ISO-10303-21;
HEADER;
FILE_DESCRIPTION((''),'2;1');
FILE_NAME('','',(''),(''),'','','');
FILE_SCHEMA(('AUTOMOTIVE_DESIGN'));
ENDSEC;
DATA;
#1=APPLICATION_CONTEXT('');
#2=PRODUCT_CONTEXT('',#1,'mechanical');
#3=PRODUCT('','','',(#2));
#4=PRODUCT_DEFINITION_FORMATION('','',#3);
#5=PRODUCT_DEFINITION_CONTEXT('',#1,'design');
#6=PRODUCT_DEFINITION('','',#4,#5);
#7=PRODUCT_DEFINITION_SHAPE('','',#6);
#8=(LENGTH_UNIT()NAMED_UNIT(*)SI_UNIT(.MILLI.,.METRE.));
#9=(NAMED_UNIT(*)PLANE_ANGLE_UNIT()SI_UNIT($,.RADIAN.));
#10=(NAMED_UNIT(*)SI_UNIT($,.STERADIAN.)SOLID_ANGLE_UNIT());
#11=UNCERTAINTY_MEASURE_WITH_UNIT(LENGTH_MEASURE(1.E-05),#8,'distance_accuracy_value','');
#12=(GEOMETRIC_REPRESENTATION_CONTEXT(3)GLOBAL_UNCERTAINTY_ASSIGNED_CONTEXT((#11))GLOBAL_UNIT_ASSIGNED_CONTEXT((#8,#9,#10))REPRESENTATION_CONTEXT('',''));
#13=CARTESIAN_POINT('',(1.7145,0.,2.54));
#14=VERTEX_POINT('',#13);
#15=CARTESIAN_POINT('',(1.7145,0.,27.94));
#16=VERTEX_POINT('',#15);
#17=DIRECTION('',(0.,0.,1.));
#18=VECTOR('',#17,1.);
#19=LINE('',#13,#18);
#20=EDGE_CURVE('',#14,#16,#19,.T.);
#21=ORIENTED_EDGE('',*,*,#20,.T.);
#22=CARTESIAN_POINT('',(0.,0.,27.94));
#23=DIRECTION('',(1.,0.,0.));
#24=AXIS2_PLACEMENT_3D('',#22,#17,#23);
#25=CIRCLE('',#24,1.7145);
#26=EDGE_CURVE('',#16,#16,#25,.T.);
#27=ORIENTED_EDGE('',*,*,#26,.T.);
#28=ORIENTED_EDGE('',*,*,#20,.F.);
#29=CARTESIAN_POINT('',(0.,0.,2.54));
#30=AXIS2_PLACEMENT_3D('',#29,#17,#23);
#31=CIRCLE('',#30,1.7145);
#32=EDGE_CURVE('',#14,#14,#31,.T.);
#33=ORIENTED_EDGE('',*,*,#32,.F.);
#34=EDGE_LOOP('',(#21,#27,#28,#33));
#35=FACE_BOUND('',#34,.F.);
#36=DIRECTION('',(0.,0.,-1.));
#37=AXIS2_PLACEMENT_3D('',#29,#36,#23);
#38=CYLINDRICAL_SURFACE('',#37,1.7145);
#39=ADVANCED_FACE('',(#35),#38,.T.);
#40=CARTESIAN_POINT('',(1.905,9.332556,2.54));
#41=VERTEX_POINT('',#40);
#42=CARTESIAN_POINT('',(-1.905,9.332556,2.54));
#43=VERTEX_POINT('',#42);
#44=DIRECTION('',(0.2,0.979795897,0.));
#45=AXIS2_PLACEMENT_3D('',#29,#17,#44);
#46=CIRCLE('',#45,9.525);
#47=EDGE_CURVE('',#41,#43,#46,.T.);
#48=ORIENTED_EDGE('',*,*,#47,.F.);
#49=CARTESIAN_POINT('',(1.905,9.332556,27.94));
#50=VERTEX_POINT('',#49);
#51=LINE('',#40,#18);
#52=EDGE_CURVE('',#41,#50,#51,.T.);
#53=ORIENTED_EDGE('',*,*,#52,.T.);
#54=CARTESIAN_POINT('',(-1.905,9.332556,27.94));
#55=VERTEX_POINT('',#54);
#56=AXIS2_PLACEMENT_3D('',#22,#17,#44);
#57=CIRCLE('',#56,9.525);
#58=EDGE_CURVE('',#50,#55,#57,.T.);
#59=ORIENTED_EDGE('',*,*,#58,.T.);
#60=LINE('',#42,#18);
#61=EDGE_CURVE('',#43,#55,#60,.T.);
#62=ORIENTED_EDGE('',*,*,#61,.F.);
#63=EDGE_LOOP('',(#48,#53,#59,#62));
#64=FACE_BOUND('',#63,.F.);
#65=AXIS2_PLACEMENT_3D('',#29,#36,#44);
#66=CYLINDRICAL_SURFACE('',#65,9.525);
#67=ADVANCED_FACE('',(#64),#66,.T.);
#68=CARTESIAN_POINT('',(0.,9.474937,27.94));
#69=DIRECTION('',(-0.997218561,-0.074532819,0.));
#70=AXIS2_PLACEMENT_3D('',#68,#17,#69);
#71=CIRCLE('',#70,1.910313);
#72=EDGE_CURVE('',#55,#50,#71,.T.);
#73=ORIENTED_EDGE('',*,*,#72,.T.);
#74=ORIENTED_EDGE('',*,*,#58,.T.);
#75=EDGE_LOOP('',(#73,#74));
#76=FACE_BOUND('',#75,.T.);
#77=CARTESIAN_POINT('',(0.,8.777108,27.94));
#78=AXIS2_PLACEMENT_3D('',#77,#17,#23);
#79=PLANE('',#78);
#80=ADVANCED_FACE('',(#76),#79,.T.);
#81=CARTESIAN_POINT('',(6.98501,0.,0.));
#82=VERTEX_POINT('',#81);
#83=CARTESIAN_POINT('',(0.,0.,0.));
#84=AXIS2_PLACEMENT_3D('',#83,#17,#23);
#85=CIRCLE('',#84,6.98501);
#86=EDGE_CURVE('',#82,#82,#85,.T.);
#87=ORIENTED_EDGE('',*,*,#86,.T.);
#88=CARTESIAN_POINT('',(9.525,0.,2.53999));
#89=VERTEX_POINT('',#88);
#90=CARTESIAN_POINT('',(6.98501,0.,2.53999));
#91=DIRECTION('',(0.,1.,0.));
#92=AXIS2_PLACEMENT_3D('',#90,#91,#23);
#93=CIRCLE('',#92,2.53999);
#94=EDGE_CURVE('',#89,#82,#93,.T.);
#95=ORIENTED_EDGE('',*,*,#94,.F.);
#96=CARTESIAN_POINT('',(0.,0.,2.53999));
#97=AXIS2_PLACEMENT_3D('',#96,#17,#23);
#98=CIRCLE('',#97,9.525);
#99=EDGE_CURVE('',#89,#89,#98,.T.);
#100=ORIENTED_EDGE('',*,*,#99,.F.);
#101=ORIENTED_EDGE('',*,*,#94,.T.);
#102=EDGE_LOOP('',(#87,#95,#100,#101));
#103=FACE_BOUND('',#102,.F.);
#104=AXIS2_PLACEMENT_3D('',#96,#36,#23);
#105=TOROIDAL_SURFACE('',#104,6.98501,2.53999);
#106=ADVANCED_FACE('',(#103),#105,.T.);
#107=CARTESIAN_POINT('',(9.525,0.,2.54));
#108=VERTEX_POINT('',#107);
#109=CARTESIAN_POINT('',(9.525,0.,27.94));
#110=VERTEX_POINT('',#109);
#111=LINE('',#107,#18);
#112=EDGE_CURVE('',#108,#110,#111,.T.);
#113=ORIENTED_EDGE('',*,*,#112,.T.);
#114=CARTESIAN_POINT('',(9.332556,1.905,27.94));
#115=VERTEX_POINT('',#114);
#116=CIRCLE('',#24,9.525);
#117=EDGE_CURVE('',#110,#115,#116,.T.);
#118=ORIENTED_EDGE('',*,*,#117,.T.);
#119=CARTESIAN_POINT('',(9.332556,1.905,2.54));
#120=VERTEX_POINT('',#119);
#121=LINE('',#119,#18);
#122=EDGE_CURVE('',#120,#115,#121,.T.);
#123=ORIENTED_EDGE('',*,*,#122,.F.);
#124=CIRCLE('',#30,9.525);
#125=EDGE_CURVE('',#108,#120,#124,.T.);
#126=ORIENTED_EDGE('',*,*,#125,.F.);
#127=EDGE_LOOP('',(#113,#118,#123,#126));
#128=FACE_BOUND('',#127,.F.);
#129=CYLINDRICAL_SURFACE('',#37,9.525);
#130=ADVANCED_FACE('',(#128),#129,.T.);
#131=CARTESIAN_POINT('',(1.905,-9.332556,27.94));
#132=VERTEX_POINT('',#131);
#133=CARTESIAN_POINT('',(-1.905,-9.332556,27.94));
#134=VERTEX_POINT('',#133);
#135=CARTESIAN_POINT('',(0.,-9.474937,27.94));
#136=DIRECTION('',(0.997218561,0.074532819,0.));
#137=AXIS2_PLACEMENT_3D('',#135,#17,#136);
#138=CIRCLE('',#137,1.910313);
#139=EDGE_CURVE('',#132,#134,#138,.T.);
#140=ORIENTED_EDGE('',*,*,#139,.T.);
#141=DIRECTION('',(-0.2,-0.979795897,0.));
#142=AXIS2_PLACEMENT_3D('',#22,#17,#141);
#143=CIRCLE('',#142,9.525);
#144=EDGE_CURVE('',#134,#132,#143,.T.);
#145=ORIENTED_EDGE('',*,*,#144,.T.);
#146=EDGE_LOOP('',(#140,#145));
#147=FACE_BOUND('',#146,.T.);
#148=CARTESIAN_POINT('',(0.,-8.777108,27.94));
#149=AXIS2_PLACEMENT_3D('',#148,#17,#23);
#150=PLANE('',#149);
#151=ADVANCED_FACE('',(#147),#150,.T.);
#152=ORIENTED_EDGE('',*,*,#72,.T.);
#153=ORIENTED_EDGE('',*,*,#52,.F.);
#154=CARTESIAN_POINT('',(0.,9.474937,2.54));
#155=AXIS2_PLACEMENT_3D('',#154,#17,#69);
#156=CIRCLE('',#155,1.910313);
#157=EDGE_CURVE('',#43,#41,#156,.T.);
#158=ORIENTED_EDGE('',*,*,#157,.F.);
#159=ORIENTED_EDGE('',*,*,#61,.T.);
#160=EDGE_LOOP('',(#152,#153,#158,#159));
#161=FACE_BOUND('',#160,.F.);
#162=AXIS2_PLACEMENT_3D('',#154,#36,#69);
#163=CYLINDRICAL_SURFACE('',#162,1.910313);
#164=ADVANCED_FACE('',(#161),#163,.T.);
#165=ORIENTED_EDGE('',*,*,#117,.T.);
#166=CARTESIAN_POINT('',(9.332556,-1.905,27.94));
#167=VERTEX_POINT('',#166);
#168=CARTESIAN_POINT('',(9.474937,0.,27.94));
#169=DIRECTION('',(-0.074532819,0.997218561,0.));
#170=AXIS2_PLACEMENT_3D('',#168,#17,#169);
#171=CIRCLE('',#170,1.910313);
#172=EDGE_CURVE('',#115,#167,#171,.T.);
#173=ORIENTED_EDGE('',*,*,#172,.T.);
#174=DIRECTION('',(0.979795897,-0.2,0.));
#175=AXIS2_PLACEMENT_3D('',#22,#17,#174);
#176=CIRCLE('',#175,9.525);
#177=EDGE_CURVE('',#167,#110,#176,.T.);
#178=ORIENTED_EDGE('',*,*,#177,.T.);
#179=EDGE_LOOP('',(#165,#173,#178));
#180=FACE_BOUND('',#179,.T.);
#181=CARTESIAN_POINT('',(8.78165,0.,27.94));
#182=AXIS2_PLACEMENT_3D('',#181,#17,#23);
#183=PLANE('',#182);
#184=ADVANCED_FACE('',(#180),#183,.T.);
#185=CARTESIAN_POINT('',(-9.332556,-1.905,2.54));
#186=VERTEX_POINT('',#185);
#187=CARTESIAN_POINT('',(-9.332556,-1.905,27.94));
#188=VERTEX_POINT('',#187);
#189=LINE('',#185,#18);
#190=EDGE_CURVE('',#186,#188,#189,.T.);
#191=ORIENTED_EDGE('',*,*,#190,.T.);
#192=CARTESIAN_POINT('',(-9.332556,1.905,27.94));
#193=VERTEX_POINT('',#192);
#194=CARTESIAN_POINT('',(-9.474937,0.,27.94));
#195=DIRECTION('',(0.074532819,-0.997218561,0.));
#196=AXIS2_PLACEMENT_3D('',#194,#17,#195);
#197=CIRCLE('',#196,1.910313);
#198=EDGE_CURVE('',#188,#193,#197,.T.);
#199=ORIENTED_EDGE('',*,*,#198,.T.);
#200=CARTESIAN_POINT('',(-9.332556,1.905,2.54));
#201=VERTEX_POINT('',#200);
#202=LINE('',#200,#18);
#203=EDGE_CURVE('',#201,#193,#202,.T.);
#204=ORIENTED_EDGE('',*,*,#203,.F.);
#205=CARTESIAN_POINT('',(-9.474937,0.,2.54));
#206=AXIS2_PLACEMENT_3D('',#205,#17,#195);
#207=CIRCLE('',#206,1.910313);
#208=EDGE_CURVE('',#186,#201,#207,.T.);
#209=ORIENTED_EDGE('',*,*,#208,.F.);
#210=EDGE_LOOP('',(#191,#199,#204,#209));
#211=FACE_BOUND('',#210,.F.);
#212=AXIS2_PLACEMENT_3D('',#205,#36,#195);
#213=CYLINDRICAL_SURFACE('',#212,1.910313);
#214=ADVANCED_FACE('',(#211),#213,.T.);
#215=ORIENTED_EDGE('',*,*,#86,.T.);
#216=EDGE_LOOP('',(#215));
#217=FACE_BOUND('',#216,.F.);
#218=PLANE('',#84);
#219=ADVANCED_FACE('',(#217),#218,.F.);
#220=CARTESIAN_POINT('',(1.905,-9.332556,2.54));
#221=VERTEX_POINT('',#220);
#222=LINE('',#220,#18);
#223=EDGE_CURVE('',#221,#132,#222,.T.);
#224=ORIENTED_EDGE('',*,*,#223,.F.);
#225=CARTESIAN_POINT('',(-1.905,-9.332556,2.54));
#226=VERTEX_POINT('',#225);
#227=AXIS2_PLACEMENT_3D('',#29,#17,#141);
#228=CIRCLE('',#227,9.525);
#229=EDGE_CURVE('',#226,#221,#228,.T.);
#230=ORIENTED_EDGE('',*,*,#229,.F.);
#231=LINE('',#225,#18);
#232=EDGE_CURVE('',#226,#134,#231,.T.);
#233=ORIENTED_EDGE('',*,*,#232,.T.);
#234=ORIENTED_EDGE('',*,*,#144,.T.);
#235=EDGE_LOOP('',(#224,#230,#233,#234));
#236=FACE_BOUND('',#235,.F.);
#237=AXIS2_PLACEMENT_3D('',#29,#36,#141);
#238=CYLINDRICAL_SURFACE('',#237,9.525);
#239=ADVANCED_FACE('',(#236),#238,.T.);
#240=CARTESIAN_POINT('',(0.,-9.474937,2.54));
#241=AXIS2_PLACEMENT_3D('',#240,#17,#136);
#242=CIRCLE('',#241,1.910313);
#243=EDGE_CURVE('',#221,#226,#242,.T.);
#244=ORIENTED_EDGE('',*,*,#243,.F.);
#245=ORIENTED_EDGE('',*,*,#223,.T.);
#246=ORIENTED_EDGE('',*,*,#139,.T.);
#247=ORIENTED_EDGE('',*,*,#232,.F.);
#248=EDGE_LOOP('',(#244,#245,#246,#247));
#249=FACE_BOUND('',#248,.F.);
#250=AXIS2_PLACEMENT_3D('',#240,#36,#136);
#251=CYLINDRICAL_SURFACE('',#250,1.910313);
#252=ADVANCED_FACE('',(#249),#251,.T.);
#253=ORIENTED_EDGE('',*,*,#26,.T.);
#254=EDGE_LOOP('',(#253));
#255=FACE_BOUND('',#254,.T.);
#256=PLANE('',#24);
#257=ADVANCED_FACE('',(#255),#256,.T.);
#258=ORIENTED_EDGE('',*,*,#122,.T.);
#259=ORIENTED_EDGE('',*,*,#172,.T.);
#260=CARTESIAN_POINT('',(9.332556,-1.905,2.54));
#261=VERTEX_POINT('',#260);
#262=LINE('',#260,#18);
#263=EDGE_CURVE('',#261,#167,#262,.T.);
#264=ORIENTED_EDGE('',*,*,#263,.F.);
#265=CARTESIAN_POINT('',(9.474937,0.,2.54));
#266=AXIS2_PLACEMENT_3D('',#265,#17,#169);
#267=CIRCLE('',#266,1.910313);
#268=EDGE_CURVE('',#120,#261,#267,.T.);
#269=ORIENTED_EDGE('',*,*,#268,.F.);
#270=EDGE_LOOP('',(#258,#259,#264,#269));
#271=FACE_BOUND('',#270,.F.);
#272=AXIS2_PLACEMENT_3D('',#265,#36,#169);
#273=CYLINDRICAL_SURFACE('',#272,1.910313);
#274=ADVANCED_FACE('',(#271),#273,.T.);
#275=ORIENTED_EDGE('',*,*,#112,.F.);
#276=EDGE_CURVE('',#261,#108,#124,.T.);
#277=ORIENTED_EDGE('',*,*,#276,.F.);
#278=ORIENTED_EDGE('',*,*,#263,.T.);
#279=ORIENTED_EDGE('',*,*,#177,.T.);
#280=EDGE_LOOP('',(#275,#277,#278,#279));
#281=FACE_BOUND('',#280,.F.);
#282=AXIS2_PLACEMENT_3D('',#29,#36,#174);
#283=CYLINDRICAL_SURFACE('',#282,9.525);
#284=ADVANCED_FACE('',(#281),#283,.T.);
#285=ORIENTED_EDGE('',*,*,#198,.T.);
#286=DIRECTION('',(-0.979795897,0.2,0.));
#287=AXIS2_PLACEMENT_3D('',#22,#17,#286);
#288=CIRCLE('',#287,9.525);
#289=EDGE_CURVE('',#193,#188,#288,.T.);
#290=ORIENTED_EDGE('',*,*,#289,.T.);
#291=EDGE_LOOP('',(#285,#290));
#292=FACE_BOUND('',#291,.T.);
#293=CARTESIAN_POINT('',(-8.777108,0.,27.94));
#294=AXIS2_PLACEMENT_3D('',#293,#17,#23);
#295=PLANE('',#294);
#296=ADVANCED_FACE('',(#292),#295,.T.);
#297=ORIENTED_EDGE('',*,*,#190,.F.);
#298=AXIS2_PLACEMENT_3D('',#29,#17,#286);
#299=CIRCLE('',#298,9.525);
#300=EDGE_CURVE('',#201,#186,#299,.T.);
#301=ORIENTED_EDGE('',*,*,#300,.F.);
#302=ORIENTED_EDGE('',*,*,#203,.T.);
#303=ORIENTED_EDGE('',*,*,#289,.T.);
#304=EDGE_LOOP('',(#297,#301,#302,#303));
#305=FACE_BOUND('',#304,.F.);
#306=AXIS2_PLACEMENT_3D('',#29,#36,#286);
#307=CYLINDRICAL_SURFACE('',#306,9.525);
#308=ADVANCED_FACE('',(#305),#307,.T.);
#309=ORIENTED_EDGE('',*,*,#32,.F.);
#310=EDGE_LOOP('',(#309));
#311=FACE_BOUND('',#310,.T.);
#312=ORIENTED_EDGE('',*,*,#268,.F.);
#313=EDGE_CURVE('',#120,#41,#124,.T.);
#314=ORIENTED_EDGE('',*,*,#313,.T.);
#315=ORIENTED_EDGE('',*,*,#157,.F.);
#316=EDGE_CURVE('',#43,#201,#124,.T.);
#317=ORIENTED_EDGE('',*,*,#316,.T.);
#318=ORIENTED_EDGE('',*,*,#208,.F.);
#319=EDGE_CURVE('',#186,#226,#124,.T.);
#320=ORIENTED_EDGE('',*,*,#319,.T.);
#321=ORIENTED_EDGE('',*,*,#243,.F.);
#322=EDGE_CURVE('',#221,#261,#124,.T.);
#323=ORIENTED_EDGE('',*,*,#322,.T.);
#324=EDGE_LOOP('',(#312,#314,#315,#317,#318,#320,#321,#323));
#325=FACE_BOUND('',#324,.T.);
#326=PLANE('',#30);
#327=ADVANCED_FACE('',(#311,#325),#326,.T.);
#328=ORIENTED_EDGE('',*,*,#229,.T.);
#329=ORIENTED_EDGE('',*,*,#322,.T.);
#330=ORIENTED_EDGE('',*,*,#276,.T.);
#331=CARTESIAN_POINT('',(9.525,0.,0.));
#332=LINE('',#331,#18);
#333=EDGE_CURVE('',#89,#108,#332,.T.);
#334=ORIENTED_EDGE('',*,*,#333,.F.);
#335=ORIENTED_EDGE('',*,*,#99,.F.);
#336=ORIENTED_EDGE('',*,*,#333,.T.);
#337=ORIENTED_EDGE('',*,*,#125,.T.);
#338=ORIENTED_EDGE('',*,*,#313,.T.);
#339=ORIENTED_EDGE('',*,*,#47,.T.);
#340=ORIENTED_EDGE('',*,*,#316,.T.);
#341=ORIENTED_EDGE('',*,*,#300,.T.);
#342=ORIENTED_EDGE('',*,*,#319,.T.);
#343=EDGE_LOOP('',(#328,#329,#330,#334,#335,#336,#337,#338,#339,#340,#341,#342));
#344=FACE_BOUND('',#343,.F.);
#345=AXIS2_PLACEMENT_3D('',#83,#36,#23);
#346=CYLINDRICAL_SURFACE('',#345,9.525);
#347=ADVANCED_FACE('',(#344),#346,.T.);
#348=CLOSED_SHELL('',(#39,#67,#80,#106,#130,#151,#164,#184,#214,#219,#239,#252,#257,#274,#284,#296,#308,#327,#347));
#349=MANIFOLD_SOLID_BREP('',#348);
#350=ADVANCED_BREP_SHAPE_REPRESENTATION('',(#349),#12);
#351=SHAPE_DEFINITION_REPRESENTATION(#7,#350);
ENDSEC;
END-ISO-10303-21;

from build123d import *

# Parameters (mm, degrees)
F0_R     = 9.525
F1_DEPTH = 2.54
F2_R     = 1.7145
F3_DEPTH = 25.4
F4_R     = 2.53999


# Not quite as in the source:
# - a fillet or chamfer is up to 0.001 mm smaller than in the source, because OpenCascade refuses the exact size


with BuildPart() as f1:
    # F0 (on Top) → F1 (new body)
    with BuildSketch(Plane.XY):
        Circle(F0_R)
    extrude(amount=F1_DEPTH)

    # F2 (on face) → F3 (join)
    with BuildSketch(Plane.XY.offset(2.54)):
        with BuildLine():
            ThreePointArc((9.525, 0), (9.4767668574, 0.9573478631), (9.33255592, 1.905))
            ThreePointArc((9.33255592, 1.905), (7.5646235439, 0), (9.33255592, -1.905))
            ThreePointArc((9.33255592, -1.905), (9.4767668574, -0.9573478631), (9.525, 0))
        make_face()
        with BuildLine():
            ThreePointArc((-1.905, 9.33255592), (0, 7.5646235439), (1.905, 9.33255592))
            ThreePointArc((1.905, 9.33255592), (0, 9.525), (-1.905, 9.33255592))
        make_face()
        with BuildLine():
            ThreePointArc((-9.33255592, -1.905), (-7.5646235439, 0), (-9.33255592, 1.905))
            ThreePointArc((-9.33255592, 1.905), (-9.525, 0), (-9.33255592, -1.905))
        make_face()
        with BuildLine():
            ThreePointArc((-1.905, -9.33255592), (0, -9.525), (1.905, -9.33255592))
            ThreePointArc((1.905, -9.33255592), (0, -7.5646235439), (-1.905, -9.33255592))
        make_face()
        Circle(F2_R)
    extrude(amount=F3_DEPTH)

    # F4 (radius 2.54 in the source; OpenCascade refuses exactly that, so slightly less here)
    f4_edges = [f1.edges().sort_by_distance(p)[0] for p in [
        (-9.525, 0, 0),
    ]]
    fillet(f4_edges, radius=F4_R)


solid = f1.part
